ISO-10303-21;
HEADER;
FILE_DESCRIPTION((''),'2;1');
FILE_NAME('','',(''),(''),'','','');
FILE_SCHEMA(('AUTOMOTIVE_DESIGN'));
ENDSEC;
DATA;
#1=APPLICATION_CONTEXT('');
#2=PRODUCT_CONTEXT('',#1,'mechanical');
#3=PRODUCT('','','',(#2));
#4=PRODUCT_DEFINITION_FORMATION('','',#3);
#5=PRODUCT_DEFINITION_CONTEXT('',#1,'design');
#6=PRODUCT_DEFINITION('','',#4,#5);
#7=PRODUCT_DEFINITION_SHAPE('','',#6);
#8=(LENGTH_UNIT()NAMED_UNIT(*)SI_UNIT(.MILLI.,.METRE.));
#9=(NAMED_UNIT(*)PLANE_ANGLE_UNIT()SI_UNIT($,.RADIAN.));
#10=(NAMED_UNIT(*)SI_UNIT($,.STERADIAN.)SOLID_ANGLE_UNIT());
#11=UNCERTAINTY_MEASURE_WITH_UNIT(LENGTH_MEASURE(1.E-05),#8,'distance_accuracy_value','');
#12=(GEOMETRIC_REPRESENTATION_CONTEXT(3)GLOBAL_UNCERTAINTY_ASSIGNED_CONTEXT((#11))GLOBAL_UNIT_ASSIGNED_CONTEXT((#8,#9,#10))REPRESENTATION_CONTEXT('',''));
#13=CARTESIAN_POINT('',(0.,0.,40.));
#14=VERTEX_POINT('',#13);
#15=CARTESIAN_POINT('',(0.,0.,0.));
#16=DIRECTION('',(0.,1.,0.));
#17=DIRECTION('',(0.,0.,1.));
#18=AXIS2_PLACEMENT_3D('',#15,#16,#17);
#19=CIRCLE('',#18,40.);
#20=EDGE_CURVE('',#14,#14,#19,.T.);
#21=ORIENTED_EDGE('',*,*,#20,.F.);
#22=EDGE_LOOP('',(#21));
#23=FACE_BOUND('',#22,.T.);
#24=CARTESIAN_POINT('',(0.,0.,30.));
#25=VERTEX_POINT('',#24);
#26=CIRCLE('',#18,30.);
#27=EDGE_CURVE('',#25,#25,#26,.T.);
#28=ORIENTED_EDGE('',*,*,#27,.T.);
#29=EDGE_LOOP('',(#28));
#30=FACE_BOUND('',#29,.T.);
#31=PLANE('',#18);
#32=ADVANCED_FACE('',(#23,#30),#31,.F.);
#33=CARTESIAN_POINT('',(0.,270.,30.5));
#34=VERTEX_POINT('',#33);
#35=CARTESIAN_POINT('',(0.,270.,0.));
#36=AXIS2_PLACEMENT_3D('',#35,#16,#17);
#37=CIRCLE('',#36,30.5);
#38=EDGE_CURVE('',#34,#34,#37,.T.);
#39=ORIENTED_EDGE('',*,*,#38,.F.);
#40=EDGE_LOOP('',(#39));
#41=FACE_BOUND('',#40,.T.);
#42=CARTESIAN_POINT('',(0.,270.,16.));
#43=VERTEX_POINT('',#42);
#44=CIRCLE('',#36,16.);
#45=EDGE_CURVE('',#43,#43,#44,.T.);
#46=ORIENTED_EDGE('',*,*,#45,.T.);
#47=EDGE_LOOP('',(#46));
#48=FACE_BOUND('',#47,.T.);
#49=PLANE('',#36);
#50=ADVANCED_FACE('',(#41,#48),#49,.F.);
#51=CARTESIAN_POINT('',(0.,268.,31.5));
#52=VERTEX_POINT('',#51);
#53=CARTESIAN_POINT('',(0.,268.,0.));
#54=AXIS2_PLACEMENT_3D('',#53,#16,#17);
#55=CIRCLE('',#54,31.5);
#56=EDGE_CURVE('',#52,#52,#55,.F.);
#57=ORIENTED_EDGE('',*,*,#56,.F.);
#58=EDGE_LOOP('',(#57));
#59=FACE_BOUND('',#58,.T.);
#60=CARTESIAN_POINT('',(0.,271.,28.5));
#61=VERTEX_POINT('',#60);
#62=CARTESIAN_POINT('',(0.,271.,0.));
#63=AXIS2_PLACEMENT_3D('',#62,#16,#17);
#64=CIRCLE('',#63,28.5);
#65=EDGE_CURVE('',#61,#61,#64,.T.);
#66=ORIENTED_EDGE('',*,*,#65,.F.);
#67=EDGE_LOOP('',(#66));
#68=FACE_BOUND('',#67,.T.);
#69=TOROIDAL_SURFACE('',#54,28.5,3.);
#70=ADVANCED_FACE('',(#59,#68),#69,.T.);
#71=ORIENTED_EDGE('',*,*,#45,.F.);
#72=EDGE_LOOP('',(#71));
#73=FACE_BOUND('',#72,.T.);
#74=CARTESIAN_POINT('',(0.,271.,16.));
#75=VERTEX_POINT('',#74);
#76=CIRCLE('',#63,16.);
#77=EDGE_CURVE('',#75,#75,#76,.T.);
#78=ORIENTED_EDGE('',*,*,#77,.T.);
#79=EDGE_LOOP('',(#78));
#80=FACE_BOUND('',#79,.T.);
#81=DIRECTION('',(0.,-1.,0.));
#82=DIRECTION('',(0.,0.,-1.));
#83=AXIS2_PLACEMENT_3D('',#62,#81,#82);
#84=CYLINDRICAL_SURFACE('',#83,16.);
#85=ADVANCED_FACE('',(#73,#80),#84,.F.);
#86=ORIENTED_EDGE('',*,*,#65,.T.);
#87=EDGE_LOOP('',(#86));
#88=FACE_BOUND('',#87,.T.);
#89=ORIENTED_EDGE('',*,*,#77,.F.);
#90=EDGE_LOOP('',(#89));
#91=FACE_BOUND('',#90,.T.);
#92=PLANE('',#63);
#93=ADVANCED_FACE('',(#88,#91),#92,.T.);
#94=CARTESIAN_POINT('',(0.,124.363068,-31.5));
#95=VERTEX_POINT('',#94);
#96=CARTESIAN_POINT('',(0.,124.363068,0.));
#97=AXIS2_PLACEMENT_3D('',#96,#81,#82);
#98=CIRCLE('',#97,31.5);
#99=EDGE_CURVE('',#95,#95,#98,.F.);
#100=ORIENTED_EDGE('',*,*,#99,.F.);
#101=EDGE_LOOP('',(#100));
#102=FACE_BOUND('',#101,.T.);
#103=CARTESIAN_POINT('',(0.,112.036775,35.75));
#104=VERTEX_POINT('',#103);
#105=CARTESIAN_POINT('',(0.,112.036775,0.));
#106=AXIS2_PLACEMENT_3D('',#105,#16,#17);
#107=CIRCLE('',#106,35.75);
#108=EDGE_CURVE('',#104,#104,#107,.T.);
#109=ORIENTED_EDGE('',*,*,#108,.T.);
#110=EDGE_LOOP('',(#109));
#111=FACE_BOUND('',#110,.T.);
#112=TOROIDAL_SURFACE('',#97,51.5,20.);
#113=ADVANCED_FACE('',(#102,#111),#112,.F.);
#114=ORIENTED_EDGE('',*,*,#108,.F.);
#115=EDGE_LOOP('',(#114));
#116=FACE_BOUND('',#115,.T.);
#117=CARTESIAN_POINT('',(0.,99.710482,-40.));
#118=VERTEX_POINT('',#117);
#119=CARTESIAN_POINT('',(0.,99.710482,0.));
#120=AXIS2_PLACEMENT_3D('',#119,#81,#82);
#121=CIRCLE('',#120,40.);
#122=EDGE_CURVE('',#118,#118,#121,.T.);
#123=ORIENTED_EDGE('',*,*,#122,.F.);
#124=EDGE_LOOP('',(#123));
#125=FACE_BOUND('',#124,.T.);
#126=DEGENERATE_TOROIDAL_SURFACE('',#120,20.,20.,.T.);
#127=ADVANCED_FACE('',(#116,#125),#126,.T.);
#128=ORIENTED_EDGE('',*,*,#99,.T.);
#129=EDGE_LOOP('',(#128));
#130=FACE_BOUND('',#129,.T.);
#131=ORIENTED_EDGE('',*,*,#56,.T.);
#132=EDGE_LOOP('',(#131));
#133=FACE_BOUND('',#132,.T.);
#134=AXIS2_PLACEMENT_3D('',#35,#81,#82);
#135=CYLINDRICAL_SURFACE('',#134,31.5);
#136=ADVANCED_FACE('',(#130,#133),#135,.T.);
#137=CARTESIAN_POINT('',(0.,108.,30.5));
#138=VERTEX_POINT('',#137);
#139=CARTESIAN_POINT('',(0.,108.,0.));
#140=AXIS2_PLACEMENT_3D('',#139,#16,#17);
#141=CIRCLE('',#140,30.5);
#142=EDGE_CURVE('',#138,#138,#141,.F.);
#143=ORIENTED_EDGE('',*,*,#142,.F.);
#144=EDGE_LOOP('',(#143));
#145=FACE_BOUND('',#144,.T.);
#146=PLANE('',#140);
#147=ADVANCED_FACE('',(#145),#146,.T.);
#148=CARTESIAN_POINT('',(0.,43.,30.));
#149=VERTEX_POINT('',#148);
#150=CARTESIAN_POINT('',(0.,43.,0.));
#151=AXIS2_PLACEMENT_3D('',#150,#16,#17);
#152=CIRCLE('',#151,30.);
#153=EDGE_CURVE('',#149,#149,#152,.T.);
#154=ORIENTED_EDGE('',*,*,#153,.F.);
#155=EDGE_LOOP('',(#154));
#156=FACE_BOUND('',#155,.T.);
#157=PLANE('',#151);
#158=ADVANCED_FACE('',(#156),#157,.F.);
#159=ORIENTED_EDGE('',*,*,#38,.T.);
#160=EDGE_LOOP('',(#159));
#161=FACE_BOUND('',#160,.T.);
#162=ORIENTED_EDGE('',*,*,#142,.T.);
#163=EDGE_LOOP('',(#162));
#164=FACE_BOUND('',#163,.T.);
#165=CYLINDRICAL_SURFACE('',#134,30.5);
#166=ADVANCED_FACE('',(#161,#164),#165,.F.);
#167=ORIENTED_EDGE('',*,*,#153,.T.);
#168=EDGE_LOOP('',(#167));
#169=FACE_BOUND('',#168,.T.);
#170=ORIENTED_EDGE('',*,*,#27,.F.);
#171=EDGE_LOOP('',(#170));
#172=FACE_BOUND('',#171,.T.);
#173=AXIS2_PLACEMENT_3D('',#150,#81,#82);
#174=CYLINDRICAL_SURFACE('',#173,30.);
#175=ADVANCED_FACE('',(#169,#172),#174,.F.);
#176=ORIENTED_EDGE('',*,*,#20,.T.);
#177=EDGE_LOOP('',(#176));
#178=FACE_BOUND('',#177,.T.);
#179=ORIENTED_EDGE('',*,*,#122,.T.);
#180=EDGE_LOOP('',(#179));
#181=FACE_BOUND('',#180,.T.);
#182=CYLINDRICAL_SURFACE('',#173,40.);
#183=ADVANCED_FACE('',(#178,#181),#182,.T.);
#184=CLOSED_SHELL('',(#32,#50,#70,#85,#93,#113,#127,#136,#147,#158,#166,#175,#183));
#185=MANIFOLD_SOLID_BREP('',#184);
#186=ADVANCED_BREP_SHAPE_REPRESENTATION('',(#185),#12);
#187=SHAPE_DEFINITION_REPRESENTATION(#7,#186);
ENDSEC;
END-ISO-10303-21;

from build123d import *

# Parameters (mm, degrees)
SKETCH_1_R      = 40
SKETCH_1_R_2    = 30
EXTRUDE_1_DEPTH = 43
SKETCH_2_R      = 40
EXTRUDE_2_DEPTH = 65
SKETCH_3_R      = 31.5
SKETCH_3_R_2    = 30.5
EXTRUDE_3_DEPTH = 162
FILLET_1_R      = 20
FILLET_2_R      = 20
SKETCH_4_R      = 31.5
SKETCH_4_R_2    = 16
EXTRUDE_4_DEPTH = 1
FILLET_3_R      = 3


with BuildPart() as part:
    # Эскиз1 → Вытянуть1 (new body)
    with BuildSketch(Plane(origin=(0, 0, 0), x_dir=(1, 0, 0), z_dir=(0, 1, 0))):
        with Locations(Location((0, 0, 0), (0, 0, 270))):
            Circle(SKETCH_1_R)
        with Locations(Location((0, 0, 0), (0, 0, 270))):
            Circle(SKETCH_1_R_2, mode=Mode.SUBTRACT)
    extrude(amount=EXTRUDE_1_DEPTH)

    # Эскиз2 → Вытянуть2 (add)
    with BuildSketch(Plane(origin=(0, 43, 0), x_dir=(1, 0, 0), z_dir=(0, 1, 0))):
        with Locations(Location((0, 0, 0), (0, 0, 270))):
            Circle(SKETCH_2_R)
    extrude(amount=EXTRUDE_2_DEPTH)

    # Эскиз3 → Вытянуть3 (add)
    with BuildSketch(Plane(origin=(0, 108, 0), x_dir=(-1, 0, 0), z_dir=(0, 1, 0))):
        with Locations(Location((0, 0, 0), (0, 0, 90))):
            Circle(SKETCH_3_R)
        with Locations(Location((0, 0, 0), (0, 0, 90))):
            Circle(SKETCH_3_R_2, mode=Mode.SUBTRACT)
    extrude(amount=EXTRUDE_3_DEPTH)

    # Скругление1
    # the kernel refuses this fillet: 20 mm, written as the material it adds along each edge
    with BuildSketch(Plane(origin=(0, 108, 0), x_dir=(0, 0, 1), z_dir=(-1, 0, 0))) as fillet_1_piece_1:
        with BuildLine():
            CenterArc((51.5, 16.363068172), FILLET_1_R, 180, 54.900367805)
            Line((31.5, 16.363068172), (31.1, 16.363068172))
            Line((31.1, 16.363068172), (31.1, 0))
            Line((31.1, 0), (31.5, -0.4))
            ThreePointArc((31.5, -0.4), (35.75, -0.4), (39.77, -0.327261363))
            Line((39.77, -0.327261363), (40, 0))
        make_face()
    revolve(axis=Axis((0, 108, 0), (0, 1, 0)))

    # Скругление2
    fillet_2_edges = [part.edges().sort_by_distance(p)[0] for p in [
        (0, 108, -40),
    ]]
    fillet(fillet_2_edges, radius=FILLET_2_R)

    # Эскиз4 → Вытянуть4 (add)
    with BuildSketch(Plane(origin=(0, 270, 0), x_dir=(-1, 0, 0), z_dir=(0, 1, 0))):
        with Locations(Location((0, 0, 0), (0, 0, 270))):
            Circle(SKETCH_4_R)
        with Locations(Location((0, 0, 0), (0, 0, 90))):
            Circle(SKETCH_4_R_2, mode=Mode.SUBTRACT)
    extrude(amount=EXTRUDE_4_DEPTH)

    # Скругление3
    fillet_3_edges = [part.edges().sort_by_distance(p)[0] for p in [
        (0, 271, 31.5),
    ]]
    fillet(fillet_3_edges, radius=FILLET_3_R)


solid = part.part
